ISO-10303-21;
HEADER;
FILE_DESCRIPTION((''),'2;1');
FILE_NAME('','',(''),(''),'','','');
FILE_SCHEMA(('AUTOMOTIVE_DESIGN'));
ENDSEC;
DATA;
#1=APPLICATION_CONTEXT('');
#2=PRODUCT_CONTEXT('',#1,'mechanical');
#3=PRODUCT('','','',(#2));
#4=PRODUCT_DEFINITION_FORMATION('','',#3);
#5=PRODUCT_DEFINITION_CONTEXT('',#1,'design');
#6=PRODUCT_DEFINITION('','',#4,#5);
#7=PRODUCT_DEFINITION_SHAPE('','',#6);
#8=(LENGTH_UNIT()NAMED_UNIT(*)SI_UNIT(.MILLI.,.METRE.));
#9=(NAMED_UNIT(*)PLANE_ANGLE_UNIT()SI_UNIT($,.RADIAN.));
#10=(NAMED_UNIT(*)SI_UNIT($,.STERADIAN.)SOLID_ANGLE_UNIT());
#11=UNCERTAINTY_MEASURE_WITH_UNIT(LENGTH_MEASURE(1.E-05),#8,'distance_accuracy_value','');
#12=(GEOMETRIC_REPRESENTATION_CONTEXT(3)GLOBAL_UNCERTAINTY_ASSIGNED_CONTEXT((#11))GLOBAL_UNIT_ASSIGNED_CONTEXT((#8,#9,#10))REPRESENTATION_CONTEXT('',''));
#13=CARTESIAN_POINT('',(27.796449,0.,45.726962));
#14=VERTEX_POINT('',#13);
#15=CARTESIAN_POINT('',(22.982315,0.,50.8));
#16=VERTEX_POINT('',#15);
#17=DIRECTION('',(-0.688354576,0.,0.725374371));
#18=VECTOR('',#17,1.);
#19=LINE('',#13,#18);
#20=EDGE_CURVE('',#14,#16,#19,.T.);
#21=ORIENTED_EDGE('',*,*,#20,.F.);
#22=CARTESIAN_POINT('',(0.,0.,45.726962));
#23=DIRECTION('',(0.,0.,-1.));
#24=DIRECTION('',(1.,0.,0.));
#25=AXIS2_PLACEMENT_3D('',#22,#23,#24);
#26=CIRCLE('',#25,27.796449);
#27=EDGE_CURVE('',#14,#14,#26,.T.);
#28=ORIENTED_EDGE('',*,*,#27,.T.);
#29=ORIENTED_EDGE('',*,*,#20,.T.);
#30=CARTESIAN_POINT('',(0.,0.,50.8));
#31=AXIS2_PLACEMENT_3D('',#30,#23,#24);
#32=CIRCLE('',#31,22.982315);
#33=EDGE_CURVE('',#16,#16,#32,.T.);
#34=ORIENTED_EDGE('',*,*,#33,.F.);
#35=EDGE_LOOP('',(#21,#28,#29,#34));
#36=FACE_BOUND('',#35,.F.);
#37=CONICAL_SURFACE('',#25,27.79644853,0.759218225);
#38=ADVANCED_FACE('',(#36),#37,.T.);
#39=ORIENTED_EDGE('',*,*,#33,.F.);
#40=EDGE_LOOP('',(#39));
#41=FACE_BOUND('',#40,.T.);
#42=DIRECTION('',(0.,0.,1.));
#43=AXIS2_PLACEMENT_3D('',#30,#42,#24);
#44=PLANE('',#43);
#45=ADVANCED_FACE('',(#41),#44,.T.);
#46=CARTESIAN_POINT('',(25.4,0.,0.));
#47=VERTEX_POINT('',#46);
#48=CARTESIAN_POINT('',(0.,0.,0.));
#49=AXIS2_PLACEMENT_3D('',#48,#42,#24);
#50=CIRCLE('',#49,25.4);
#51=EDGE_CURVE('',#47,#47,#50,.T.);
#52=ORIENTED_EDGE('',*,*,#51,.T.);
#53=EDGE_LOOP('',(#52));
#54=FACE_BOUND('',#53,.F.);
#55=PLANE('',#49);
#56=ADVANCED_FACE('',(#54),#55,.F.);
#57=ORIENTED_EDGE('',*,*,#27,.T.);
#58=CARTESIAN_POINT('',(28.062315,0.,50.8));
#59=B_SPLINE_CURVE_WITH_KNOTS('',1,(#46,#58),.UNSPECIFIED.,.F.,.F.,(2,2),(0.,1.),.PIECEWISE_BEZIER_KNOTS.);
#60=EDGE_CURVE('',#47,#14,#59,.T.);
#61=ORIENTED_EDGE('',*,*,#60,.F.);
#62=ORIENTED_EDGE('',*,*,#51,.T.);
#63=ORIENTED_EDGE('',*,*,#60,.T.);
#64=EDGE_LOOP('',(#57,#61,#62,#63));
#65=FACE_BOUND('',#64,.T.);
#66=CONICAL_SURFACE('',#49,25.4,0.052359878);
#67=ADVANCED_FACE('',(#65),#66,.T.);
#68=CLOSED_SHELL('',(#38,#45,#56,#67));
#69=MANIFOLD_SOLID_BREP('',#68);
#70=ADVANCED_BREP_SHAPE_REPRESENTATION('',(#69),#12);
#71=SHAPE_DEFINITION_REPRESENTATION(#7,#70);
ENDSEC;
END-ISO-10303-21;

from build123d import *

# Parameters (mm, degrees)
F0_R     = 25.4
F1_DEPTH = 50.8
F1_TAPER = -3


# Not quite as in the source:
# - a fillet or chamfer that OpenCascade refuses, or shapes differently, is made with other operations: its cross-section is extruded or revolved along the edge and cut away or added


with BuildPart() as f1:
    # F0 (on Top) → F1 (new body)
    with BuildSketch(Plane.XY):
        Circle(F0_R)
    extrude(amount=F1_DEPTH, taper=F1_TAPER)

    # F2: chamfer of 5.08 on 1 edges, made by hand

    # F2_s1 → F2_t2 (revolve, cut)
    with BuildSketch(Plane.XZ):
        Polygon((27.7964485299, 45.7269619634), (22.9823151876, 50.8), (28.0623151876, 50.8), align=None)
    revolve(axis=Axis((0, 0, 50.8), (0, 0, -1)), mode=Mode.SUBTRACT)


solid = f1.part
